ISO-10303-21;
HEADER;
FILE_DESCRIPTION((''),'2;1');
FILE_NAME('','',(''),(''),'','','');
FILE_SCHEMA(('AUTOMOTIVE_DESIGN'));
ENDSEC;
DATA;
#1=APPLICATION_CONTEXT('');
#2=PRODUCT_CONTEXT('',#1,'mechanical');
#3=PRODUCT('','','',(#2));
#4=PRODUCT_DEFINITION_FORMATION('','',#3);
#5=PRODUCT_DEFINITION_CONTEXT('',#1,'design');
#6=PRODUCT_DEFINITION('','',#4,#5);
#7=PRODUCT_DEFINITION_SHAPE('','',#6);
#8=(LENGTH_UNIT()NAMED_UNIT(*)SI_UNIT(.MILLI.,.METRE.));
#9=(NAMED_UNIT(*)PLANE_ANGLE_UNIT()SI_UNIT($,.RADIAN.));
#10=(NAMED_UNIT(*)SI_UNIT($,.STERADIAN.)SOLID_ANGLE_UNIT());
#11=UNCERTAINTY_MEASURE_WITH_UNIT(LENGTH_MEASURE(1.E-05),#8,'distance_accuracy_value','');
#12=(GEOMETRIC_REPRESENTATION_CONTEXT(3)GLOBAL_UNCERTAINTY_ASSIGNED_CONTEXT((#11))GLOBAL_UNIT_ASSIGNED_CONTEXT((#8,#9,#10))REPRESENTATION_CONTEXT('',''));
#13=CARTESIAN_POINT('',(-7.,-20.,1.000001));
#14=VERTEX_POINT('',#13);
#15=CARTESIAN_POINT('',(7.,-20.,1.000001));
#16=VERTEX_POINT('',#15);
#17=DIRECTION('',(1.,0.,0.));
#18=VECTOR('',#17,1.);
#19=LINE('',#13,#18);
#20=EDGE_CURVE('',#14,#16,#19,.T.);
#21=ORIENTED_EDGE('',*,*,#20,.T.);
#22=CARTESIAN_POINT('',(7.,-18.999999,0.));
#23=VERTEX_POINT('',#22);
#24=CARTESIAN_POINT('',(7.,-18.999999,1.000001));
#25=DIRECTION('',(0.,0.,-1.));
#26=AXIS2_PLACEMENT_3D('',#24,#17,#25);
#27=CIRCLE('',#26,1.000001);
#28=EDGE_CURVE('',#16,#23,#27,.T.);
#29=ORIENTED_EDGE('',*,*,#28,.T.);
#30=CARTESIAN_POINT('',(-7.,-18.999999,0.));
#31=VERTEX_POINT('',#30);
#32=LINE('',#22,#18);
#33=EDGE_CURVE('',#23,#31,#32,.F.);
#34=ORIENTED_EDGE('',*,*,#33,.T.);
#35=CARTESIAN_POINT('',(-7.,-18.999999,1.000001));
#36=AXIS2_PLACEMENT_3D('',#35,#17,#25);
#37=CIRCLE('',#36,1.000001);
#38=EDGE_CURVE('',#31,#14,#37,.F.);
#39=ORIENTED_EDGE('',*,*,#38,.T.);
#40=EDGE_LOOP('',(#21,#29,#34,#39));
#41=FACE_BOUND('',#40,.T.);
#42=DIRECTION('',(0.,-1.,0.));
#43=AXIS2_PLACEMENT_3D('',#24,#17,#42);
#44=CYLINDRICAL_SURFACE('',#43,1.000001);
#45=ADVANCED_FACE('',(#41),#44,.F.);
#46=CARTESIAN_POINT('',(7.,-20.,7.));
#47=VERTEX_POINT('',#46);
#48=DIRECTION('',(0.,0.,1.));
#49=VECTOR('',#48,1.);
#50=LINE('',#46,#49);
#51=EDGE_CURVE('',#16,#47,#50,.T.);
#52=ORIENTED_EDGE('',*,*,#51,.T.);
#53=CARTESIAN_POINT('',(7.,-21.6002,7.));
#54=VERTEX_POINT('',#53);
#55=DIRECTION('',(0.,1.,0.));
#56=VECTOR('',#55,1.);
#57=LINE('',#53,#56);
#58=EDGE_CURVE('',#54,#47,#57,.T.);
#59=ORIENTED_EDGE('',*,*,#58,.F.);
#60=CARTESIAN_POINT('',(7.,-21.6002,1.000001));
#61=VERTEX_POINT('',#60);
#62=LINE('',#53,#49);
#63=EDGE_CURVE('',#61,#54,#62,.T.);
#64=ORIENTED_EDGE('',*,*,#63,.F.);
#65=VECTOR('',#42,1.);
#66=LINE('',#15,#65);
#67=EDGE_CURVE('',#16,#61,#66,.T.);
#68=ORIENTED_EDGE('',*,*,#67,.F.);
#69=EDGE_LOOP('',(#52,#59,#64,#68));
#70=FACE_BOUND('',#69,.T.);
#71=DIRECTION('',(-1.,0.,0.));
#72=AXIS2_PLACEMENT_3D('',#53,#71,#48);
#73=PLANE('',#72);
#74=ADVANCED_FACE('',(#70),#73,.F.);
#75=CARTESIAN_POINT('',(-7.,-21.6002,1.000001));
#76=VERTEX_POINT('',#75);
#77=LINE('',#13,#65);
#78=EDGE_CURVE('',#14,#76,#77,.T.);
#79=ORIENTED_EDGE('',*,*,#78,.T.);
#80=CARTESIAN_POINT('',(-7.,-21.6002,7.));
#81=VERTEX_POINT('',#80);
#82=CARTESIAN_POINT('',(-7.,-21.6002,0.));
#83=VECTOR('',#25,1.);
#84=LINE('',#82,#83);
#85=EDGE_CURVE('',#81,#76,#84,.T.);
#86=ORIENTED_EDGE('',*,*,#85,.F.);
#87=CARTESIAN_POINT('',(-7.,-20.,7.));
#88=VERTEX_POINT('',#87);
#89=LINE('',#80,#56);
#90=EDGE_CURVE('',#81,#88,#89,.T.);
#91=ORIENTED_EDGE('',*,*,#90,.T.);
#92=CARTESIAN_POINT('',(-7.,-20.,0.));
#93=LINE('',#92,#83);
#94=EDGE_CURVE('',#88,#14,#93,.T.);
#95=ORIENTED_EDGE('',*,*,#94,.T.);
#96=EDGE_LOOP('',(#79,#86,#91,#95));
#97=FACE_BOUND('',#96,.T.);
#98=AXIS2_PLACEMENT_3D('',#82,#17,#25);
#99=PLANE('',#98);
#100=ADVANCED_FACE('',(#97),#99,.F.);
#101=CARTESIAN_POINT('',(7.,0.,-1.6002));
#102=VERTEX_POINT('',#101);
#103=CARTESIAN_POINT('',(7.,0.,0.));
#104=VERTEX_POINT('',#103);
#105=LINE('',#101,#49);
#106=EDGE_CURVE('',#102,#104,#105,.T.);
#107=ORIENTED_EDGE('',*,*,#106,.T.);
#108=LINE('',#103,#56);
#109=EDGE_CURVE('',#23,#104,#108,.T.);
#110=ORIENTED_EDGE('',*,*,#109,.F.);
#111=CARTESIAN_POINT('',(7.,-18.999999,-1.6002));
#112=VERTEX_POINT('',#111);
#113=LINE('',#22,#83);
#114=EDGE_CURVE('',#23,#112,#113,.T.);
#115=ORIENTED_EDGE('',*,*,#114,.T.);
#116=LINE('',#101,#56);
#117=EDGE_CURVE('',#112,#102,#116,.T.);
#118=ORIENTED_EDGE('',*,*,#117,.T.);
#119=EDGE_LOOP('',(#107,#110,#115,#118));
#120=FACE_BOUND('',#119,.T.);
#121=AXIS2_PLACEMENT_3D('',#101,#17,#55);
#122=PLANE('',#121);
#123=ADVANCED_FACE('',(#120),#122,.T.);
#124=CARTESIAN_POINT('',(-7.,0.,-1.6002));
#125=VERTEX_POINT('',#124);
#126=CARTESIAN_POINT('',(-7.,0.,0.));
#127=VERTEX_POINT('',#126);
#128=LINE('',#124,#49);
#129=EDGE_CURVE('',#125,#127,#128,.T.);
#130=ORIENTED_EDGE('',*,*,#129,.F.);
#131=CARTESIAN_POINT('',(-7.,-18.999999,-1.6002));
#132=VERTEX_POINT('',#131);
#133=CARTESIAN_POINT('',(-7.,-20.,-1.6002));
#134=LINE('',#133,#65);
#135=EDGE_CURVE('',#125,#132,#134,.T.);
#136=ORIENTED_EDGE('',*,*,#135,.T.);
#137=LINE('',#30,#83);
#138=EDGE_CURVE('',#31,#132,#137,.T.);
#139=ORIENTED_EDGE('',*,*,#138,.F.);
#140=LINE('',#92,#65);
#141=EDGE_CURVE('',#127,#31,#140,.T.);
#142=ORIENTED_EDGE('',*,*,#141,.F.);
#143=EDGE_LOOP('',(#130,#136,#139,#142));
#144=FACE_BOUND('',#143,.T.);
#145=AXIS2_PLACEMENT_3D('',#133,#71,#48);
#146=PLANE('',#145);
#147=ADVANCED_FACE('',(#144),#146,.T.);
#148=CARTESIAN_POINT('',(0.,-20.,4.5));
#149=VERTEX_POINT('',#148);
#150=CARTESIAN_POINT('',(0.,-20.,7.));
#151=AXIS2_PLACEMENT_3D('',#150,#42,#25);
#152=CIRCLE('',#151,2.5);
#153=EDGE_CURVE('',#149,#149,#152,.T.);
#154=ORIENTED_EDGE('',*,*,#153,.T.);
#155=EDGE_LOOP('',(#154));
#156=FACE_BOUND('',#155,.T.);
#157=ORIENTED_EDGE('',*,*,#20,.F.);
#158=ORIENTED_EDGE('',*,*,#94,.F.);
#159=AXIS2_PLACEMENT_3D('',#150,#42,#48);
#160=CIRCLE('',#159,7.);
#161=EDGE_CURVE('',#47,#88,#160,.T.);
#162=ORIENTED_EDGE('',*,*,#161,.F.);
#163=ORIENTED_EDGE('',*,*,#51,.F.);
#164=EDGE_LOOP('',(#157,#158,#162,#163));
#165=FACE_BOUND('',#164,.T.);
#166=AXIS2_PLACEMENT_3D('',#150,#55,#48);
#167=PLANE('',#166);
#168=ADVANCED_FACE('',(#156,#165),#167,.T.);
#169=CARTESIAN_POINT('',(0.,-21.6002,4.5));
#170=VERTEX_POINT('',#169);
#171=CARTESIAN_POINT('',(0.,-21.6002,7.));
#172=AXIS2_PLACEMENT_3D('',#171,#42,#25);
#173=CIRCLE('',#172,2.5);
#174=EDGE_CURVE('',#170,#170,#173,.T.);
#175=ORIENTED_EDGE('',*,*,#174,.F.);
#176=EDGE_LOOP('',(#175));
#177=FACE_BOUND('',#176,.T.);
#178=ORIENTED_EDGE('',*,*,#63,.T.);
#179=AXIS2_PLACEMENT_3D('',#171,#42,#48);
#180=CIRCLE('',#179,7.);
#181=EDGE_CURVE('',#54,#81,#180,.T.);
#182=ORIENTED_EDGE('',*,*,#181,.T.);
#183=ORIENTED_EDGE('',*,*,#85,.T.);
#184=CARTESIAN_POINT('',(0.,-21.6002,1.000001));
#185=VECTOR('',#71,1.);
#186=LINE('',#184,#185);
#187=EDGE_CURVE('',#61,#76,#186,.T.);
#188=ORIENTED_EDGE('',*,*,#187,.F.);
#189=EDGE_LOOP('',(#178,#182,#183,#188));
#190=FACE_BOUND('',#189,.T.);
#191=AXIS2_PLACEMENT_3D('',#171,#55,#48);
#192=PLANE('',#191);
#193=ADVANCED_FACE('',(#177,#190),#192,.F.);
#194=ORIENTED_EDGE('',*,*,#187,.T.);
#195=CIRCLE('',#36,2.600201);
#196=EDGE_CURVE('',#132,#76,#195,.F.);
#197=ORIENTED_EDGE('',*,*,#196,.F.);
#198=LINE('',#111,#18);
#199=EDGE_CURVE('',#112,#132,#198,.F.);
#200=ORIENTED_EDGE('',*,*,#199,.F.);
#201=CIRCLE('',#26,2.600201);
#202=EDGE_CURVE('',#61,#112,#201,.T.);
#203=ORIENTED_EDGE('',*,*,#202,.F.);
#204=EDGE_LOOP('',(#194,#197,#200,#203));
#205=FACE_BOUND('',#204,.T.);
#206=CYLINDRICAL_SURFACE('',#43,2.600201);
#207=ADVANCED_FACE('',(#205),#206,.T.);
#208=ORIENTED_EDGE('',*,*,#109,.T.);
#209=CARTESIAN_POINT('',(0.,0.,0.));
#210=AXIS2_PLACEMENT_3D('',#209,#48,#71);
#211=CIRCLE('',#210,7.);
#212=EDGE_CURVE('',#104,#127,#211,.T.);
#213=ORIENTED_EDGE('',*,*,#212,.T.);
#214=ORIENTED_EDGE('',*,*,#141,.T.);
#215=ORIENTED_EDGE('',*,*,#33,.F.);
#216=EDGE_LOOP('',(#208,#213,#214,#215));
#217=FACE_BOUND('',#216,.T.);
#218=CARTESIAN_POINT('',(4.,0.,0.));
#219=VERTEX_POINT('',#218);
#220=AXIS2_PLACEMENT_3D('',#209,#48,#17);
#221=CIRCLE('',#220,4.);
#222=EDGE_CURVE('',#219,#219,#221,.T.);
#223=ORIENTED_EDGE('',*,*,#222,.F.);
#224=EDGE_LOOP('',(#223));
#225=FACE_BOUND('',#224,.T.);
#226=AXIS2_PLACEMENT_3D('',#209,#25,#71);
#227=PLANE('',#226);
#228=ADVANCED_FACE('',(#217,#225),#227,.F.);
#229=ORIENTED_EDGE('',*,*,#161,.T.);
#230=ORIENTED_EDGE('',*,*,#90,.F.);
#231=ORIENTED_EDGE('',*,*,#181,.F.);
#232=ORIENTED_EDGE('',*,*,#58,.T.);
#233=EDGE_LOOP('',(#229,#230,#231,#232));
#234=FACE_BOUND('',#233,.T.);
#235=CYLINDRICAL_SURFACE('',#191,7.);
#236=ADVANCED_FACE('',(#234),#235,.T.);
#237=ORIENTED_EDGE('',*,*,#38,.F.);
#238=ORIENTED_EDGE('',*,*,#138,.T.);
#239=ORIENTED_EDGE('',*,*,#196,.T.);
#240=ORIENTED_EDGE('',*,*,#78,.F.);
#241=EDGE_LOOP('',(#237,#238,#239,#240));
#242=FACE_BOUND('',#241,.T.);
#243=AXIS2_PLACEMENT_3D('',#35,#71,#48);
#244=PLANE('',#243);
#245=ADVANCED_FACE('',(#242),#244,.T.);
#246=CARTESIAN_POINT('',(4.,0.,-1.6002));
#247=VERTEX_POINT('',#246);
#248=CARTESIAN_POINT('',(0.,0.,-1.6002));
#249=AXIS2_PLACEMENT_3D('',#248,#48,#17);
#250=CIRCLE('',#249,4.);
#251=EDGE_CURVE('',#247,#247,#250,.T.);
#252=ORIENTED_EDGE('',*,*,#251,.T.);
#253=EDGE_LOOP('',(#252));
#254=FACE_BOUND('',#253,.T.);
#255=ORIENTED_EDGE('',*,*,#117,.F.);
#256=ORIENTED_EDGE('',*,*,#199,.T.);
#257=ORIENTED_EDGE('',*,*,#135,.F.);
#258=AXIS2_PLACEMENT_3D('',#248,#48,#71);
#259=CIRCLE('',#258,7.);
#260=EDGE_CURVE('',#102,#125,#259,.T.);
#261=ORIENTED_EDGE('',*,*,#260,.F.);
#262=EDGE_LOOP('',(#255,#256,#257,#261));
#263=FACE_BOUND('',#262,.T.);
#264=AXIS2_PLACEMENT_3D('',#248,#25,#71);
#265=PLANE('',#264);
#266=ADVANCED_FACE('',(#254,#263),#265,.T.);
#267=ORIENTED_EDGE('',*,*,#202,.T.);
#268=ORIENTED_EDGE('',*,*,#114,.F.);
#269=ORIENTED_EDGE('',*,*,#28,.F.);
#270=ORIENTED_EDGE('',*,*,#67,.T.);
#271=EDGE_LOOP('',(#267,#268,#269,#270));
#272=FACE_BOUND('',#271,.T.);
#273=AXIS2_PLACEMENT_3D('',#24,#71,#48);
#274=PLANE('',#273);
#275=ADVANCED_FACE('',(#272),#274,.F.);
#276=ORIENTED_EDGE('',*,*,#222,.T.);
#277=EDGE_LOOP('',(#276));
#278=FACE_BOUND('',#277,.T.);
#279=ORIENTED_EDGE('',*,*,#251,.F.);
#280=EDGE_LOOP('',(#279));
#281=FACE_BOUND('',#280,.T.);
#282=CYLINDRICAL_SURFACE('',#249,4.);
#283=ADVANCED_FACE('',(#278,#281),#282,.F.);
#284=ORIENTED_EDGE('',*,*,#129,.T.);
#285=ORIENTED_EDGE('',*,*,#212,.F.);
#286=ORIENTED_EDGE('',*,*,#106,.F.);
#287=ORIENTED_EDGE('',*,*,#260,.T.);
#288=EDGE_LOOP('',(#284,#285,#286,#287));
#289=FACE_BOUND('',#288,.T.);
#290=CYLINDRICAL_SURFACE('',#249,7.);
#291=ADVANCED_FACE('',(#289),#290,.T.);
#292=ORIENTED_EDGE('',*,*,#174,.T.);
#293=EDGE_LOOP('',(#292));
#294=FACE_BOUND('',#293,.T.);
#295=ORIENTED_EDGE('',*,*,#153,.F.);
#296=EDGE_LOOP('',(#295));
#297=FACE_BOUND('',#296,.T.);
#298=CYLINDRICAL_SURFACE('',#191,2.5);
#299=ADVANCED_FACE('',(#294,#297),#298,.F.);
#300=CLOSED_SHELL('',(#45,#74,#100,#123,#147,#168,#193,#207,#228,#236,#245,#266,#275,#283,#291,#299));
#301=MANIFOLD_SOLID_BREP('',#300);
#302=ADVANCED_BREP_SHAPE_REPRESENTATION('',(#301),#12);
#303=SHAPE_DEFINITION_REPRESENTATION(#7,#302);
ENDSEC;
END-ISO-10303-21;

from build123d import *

# Parameters (mm, degrees)
SKETCH1_R                    = 4
BASE_FLANGE1_DEPTH           = 1.6002
EDGE_FLANGE1_STRIP_W         = 8.40080108
EDGE_FLANGE1_STRIP_H         = 1.6002
EDGE_FLANGE1_STRIP_CUT_DEPTH = 14
EDGE_FLANGE1_DEPTH           = 14
EDGE_FLANGE1_START           = 1.6002
EDGE_FLANGE1_PROFILE_R       = 2.5
EDGE_FLANGE1_FLAT_DEPTH      = 1.6002


# Sheet-metal steps are written as plain solids
with BuildPart() as part:
    # Sketch1 → Base-Flange1 (new body)
    with BuildSketch(Plane.XY):
        with BuildLine():
            Line((-7, -20), (-7, 0))
            ThreePointArc((-7, 0), (0, 7), (7, 0))
            Line((7, 0), (7, -20))
            Line((7, -20), (-7, -20))
        make_face()
        Circle(SKETCH1_R, mode=Mode.SUBTRACT)
    extrude(amount=-BASE_FLANGE1_DEPTH)

    # Edge-Flange1 strip (across the edge) → Edge-Flange1 strip cut (cut)
    with BuildSketch(Plane(origin=(-7, -20, 0), x_dir=(0, 1, 0), z_dir=(1, 0, 0))):
        with Locations((-3.2004, -0.8001)):
            Rectangle(EDGE_FLANGE1_STRIP_W, EDGE_FLANGE1_STRIP_H)
    extrude(amount=EDGE_FLANGE1_STRIP_CUT_DEPTH, mode=Mode.SUBTRACT)

    # Edge-Flange1 bend section (across the edge) → Edge-Flange1 (add)
    with BuildSketch(Plane(origin=(-7, -20, 0), x_dir=(0, 1, 0), z_dir=(1, 0, 0))):
        with BuildLine():
            Line((-1.6002, 1.00000054), (0, 1.00000054))
            ThreePointArc((0, 1.00000054), (0.292893377, 0.292893377), (1.00000054, 0))
            Line((1.00000054, 0), (1.00000054, -1.6002))
            ThreePointArc((1.00000054, -1.6002), (-0.838618894, -0.838618894), (-1.6002, 1.00000054))
        make_face()
    extrude(amount=EDGE_FLANGE1_DEPTH)

    # Edge-Flange1 profile (on flange) → Edge-Flange1 flat (add)
    with BuildSketch(Plane.XZ.offset(20).offset(EDGE_FLANGE1_START)):
        with BuildLine():
            ThreePointArc((7, 7), (0, 14), (-7, 7))
            Line((-7, 7), (-7, 1.00000054))
            Line((-7, 1.00000054), (7, 1.00000054))
            Line((7, 1.00000054), (7, 7))
        make_face()
        with Locations((0, 7)):
            Circle(EDGE_FLANGE1_PROFILE_R, mode=Mode.SUBTRACT)
    extrude(amount=-EDGE_FLANGE1_FLAT_DEPTH)


solid = part.part
